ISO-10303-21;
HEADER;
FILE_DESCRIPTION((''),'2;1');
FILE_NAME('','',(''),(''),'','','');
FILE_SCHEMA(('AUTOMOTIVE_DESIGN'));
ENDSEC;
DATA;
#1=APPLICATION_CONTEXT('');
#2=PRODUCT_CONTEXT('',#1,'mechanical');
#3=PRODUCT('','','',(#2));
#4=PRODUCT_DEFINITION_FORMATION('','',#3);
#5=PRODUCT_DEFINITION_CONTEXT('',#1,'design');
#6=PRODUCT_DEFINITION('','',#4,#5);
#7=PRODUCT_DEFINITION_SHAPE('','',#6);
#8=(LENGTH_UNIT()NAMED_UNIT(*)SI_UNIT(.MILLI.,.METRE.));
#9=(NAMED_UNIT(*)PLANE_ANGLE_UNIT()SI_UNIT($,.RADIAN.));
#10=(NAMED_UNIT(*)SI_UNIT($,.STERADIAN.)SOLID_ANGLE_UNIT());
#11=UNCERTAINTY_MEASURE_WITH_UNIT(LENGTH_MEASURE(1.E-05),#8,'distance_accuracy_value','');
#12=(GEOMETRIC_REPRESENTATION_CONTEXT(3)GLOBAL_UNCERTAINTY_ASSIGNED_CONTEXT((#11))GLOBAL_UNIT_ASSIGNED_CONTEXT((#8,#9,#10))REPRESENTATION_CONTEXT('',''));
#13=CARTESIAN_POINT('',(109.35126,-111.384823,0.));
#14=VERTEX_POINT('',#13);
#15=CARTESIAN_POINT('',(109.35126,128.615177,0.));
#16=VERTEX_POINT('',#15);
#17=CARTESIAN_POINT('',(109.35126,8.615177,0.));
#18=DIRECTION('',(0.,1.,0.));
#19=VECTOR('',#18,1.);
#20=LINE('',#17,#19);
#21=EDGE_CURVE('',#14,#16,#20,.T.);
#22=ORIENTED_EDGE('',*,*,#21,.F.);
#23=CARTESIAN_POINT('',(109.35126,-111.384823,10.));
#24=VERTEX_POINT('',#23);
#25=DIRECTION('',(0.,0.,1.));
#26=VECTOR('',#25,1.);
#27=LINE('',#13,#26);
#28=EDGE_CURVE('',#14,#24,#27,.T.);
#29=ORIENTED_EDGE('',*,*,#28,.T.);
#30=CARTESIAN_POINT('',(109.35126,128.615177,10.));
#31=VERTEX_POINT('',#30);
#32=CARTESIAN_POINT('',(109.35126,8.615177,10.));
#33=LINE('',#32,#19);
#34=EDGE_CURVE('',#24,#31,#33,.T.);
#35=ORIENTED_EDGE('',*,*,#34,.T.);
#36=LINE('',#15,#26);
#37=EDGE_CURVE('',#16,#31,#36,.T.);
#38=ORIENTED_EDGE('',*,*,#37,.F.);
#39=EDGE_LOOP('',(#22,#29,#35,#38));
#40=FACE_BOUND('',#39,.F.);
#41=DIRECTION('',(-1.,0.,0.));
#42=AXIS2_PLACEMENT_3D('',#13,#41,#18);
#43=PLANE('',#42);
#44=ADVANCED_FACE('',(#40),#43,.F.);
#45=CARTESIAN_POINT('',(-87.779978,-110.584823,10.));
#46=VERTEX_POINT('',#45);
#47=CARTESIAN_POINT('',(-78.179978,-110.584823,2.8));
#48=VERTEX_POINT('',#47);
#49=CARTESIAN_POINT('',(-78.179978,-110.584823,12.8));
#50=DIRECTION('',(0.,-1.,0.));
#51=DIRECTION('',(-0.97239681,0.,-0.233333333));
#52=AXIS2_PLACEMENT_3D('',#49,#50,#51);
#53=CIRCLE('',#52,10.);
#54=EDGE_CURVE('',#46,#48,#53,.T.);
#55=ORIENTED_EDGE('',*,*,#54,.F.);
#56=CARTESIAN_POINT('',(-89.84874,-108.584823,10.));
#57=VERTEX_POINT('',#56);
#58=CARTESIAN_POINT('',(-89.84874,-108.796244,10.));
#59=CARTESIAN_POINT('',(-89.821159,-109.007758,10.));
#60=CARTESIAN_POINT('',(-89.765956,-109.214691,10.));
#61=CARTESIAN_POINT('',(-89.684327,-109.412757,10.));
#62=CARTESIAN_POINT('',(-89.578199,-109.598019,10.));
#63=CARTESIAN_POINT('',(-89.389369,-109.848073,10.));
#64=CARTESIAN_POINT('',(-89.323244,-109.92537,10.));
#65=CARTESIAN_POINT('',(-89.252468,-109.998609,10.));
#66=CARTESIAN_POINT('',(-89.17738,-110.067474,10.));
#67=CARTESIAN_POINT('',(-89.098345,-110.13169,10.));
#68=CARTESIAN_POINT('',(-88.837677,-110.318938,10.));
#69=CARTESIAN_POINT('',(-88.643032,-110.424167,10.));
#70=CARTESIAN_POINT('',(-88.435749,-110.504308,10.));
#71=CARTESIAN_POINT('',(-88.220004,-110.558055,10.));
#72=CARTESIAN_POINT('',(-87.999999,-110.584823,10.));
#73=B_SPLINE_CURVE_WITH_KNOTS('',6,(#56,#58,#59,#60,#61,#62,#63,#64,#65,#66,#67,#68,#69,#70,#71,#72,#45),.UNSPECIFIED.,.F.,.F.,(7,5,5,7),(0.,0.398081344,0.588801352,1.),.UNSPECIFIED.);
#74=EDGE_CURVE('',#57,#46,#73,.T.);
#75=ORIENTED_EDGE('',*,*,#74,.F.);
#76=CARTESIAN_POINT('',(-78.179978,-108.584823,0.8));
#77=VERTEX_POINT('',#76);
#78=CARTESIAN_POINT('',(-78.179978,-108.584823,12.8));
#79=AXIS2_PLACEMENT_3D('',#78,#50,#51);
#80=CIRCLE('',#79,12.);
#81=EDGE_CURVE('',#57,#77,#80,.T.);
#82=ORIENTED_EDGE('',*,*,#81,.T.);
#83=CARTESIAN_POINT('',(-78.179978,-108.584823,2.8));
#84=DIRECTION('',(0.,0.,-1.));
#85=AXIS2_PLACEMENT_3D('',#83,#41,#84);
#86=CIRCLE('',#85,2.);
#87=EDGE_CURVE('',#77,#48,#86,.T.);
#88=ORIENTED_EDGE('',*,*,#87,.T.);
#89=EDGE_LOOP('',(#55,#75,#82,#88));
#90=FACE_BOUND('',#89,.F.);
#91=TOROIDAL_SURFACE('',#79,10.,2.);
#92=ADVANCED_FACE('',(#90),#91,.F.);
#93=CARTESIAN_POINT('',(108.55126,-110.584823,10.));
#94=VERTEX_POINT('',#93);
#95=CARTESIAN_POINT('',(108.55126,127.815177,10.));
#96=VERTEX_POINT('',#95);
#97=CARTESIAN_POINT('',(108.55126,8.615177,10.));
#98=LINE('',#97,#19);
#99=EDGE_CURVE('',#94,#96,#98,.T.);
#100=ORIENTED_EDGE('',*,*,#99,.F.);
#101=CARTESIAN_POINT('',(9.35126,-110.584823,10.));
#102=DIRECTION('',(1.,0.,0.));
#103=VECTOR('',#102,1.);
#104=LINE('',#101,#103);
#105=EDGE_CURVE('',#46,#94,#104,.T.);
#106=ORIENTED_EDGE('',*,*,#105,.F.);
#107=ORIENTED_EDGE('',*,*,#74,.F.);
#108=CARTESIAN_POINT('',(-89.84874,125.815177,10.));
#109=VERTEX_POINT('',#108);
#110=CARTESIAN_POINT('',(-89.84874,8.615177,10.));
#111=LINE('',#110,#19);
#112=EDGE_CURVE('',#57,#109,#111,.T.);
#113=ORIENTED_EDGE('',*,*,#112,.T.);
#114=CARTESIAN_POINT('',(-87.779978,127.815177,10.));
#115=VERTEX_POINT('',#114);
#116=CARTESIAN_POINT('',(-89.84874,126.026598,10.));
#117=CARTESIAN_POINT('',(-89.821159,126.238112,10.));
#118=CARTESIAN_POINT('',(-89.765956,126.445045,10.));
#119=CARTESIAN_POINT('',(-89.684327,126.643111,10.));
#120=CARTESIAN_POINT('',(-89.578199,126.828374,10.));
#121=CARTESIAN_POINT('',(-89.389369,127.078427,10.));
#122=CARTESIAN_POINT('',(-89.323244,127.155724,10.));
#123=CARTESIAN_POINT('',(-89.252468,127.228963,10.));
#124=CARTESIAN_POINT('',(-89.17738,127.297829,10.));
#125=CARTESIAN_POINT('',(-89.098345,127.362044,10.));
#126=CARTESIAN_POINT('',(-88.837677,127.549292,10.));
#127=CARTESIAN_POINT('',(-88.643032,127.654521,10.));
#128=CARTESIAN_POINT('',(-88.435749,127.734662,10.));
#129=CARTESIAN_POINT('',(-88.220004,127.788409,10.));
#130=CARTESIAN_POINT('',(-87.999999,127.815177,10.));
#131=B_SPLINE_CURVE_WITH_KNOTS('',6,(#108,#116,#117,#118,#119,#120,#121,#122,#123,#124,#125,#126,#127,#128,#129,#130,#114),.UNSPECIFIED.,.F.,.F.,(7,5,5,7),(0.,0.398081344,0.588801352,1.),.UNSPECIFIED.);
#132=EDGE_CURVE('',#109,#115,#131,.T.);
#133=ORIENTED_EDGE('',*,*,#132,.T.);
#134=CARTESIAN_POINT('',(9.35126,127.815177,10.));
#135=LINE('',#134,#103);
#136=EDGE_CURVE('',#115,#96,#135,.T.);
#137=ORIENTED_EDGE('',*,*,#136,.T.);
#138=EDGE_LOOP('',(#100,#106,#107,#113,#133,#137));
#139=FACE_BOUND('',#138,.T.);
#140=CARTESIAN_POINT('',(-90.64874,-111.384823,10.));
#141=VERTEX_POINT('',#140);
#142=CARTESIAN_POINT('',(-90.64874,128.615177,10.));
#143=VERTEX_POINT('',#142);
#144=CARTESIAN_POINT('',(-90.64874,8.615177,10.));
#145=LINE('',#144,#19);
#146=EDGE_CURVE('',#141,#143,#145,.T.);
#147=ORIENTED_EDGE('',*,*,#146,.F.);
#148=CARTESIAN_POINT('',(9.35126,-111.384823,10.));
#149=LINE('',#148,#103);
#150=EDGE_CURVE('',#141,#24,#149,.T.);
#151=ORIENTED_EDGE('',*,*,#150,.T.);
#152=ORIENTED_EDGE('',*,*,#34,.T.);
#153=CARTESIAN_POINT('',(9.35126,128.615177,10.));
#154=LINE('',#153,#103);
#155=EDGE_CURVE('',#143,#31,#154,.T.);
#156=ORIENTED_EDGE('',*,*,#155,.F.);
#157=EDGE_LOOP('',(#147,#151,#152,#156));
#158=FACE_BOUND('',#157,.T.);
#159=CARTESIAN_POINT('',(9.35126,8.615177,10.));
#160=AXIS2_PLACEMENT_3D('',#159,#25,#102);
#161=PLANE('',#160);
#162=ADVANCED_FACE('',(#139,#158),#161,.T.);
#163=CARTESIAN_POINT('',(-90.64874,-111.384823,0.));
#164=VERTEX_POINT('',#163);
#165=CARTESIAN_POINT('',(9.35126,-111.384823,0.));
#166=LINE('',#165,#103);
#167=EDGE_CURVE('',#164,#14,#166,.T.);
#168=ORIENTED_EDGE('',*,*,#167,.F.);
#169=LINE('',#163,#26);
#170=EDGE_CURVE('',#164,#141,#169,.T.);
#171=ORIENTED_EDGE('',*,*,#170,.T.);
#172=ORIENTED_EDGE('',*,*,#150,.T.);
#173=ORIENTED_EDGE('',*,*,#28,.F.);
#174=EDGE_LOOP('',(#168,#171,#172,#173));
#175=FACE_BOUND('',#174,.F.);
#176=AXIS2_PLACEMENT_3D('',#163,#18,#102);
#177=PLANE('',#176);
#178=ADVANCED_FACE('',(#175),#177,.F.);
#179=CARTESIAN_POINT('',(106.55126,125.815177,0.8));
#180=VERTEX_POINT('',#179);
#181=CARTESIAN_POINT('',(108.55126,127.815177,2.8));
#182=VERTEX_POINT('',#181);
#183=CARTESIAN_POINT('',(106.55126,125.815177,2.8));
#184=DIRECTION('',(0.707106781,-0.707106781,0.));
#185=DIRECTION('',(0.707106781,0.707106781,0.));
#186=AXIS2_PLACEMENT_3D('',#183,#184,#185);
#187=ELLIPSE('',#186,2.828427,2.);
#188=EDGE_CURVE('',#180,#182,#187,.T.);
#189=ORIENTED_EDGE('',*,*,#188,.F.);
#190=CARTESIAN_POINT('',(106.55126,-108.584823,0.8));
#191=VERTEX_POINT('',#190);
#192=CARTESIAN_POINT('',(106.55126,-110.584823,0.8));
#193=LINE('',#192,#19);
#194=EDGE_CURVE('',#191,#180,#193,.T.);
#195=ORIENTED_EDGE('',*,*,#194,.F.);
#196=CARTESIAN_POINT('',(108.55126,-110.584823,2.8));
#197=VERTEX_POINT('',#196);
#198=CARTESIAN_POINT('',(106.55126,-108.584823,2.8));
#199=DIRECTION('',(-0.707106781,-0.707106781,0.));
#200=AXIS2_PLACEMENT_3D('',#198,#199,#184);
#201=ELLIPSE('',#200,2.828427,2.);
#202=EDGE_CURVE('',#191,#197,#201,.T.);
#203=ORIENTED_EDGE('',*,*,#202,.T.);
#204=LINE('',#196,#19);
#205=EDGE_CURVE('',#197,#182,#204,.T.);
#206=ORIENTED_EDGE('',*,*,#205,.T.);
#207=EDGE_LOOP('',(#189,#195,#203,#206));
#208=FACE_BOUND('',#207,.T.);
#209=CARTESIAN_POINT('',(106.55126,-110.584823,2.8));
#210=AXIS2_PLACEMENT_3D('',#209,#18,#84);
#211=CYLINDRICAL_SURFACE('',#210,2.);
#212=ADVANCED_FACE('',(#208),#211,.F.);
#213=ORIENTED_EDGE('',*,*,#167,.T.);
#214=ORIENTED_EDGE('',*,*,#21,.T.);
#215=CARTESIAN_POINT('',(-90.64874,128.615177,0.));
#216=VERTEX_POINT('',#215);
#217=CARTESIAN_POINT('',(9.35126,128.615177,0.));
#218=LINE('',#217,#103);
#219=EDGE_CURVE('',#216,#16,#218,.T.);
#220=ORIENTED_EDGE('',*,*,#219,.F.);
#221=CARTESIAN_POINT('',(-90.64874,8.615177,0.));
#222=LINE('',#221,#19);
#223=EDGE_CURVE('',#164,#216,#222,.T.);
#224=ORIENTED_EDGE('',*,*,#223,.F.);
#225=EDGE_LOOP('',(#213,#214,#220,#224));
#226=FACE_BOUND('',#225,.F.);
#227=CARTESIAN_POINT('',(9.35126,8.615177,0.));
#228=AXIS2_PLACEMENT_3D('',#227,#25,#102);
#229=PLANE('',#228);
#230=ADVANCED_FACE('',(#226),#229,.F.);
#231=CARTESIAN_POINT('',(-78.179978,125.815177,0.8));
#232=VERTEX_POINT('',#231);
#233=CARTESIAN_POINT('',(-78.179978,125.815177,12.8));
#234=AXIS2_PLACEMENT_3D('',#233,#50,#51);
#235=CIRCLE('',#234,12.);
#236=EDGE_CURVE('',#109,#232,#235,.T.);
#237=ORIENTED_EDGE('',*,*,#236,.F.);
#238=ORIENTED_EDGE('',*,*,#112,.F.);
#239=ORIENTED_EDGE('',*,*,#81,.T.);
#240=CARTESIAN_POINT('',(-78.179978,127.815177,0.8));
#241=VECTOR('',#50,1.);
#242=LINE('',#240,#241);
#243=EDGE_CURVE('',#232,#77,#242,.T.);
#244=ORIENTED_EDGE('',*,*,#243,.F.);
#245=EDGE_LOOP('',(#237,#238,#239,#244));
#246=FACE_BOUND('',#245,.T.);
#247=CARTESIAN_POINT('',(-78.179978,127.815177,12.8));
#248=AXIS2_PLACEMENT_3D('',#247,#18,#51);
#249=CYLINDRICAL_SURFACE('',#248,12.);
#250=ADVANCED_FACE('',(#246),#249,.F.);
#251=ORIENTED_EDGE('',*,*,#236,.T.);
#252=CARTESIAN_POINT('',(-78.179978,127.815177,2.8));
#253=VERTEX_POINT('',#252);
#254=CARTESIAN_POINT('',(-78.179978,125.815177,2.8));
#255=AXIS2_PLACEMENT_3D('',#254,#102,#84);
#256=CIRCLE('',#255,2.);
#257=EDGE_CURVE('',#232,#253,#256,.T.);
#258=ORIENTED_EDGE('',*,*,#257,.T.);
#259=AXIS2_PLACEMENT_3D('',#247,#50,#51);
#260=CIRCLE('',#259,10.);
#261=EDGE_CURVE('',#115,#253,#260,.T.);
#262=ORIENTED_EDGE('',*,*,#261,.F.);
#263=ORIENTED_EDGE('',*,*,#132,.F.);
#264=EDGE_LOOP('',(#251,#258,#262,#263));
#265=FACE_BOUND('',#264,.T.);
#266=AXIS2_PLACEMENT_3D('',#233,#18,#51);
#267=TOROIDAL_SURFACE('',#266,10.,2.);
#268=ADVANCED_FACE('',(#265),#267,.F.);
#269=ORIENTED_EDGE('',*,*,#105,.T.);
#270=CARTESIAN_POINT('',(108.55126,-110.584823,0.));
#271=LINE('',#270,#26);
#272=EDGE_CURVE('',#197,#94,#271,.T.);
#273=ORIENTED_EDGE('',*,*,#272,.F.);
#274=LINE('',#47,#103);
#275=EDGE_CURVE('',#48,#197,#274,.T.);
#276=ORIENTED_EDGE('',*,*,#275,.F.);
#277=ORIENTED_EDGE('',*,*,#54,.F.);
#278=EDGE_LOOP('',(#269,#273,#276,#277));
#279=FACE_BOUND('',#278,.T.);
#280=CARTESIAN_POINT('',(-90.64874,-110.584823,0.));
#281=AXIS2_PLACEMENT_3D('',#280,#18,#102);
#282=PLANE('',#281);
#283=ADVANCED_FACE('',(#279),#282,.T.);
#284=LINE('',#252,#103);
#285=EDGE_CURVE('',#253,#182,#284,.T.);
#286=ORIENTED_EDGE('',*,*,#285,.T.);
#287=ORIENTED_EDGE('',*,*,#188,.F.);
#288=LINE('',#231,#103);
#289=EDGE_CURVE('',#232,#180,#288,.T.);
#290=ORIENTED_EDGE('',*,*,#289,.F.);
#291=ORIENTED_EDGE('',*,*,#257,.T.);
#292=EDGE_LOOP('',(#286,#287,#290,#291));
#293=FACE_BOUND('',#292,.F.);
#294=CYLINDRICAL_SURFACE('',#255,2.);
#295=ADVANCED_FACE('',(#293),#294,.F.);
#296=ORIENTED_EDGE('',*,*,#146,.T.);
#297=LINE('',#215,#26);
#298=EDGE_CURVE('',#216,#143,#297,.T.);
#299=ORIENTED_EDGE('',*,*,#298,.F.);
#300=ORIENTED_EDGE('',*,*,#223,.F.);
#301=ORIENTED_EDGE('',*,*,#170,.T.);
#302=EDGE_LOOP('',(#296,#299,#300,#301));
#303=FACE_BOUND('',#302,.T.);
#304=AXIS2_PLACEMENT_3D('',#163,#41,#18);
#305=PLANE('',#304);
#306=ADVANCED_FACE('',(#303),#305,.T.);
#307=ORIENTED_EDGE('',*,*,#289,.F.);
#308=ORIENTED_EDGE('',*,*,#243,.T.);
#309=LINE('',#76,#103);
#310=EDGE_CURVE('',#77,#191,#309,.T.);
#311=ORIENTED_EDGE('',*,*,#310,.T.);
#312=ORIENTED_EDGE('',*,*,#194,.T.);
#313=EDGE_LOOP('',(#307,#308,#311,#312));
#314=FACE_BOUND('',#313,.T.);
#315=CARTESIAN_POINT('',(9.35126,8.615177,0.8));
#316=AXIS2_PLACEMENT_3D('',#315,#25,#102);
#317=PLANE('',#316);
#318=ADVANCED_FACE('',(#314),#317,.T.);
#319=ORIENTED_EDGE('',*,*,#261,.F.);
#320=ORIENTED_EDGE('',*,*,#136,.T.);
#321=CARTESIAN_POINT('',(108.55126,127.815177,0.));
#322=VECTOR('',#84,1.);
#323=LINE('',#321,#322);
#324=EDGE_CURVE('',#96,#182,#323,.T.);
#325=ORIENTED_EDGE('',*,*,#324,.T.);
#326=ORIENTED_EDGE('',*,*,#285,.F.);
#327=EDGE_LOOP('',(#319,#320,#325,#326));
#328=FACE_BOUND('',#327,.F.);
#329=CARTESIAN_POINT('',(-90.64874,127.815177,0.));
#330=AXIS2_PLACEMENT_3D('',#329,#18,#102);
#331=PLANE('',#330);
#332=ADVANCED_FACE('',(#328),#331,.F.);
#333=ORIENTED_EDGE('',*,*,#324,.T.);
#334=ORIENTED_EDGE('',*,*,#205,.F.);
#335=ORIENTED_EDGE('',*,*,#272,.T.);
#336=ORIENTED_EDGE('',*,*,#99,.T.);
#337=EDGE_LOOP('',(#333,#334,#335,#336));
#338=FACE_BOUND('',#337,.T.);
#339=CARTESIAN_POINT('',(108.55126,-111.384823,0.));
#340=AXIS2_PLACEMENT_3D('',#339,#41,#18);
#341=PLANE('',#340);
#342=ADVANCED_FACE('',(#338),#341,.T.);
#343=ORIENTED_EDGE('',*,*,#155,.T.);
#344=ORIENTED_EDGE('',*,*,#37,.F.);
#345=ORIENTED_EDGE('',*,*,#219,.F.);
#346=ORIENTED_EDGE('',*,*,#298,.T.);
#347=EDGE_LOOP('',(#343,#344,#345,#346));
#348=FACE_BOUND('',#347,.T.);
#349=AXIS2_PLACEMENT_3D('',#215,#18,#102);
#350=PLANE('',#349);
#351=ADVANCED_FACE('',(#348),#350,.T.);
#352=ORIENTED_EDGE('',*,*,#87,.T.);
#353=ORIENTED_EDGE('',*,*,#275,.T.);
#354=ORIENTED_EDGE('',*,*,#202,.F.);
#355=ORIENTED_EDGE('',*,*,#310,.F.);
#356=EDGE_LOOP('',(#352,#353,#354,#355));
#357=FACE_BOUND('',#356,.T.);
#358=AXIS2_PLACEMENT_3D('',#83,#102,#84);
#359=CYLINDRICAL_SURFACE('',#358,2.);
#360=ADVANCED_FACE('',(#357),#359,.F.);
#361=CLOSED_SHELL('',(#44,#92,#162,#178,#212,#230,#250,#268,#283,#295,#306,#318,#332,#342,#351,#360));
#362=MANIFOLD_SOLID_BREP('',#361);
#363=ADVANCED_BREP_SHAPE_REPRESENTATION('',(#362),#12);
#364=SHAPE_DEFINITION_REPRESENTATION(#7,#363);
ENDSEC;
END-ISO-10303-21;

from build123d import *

# Parameters (mm, degrees)
F0_W        = 200
F0_H        = 240
F1_DEPTH    = 10
F2_T        = -0.8
F3_T1_DEPTH = 238.4
F4_R        = 2


# Not quite as in the source:
# - a fillet or chamfer that OpenCascade refuses, or shapes differently, is made with other operations: its cross-section is extruded or revolved along the edge and cut away or added


with BuildPart() as f1:
    # F0 (on Top) → F1 (new body)
    with BuildSketch(Plane.XY):
        with Locations((9.3512600348, 8.6151771247)):
            Rectangle(F0_W, F0_H)
    extrude(amount=F1_DEPTH)

    # F2
    f2_openings = [f1.faces().sort_by_distance(p)[0] for p in [
        (9.35126, 8.615177, 10),
    ]]
    offset(amount=F2_T, openings=f2_openings)

    # F3: fillet of radius 12 on 1 edges, made by hand

    # F3_s2 → F3_t1 (join)
    with BuildSketch(Plane.XZ.offset(-127.8151771247)):
        with BuildLine():
            ThreePointArc((-89.8487399652, 10), (-85.609648497, 3.3766248085), (-78.1799782486, 0.8))
            Line((-78.1799782486, 0.8), (-89.8487399652, 0.8))
            Line((-89.8487399652, 0.8), (-89.8487399652, 10))
        make_face()
    extrude(amount=F3_T1_DEPTH)

    # F4
    f4_edges = [f1.edges().sort_by_distance(p)[0] for p in [
        (15.185641, 127.815177, 0.8),
        (15.185641, -110.584823, 0.8),
        (108.55126, 8.615177, 0.8),
        (-85.609648, 127.815177, 3.376625),
        (-85.609648, -110.584823, 3.376625),
    ]]
    fillet(f4_edges, radius=F4_R)


solid = f1.part
